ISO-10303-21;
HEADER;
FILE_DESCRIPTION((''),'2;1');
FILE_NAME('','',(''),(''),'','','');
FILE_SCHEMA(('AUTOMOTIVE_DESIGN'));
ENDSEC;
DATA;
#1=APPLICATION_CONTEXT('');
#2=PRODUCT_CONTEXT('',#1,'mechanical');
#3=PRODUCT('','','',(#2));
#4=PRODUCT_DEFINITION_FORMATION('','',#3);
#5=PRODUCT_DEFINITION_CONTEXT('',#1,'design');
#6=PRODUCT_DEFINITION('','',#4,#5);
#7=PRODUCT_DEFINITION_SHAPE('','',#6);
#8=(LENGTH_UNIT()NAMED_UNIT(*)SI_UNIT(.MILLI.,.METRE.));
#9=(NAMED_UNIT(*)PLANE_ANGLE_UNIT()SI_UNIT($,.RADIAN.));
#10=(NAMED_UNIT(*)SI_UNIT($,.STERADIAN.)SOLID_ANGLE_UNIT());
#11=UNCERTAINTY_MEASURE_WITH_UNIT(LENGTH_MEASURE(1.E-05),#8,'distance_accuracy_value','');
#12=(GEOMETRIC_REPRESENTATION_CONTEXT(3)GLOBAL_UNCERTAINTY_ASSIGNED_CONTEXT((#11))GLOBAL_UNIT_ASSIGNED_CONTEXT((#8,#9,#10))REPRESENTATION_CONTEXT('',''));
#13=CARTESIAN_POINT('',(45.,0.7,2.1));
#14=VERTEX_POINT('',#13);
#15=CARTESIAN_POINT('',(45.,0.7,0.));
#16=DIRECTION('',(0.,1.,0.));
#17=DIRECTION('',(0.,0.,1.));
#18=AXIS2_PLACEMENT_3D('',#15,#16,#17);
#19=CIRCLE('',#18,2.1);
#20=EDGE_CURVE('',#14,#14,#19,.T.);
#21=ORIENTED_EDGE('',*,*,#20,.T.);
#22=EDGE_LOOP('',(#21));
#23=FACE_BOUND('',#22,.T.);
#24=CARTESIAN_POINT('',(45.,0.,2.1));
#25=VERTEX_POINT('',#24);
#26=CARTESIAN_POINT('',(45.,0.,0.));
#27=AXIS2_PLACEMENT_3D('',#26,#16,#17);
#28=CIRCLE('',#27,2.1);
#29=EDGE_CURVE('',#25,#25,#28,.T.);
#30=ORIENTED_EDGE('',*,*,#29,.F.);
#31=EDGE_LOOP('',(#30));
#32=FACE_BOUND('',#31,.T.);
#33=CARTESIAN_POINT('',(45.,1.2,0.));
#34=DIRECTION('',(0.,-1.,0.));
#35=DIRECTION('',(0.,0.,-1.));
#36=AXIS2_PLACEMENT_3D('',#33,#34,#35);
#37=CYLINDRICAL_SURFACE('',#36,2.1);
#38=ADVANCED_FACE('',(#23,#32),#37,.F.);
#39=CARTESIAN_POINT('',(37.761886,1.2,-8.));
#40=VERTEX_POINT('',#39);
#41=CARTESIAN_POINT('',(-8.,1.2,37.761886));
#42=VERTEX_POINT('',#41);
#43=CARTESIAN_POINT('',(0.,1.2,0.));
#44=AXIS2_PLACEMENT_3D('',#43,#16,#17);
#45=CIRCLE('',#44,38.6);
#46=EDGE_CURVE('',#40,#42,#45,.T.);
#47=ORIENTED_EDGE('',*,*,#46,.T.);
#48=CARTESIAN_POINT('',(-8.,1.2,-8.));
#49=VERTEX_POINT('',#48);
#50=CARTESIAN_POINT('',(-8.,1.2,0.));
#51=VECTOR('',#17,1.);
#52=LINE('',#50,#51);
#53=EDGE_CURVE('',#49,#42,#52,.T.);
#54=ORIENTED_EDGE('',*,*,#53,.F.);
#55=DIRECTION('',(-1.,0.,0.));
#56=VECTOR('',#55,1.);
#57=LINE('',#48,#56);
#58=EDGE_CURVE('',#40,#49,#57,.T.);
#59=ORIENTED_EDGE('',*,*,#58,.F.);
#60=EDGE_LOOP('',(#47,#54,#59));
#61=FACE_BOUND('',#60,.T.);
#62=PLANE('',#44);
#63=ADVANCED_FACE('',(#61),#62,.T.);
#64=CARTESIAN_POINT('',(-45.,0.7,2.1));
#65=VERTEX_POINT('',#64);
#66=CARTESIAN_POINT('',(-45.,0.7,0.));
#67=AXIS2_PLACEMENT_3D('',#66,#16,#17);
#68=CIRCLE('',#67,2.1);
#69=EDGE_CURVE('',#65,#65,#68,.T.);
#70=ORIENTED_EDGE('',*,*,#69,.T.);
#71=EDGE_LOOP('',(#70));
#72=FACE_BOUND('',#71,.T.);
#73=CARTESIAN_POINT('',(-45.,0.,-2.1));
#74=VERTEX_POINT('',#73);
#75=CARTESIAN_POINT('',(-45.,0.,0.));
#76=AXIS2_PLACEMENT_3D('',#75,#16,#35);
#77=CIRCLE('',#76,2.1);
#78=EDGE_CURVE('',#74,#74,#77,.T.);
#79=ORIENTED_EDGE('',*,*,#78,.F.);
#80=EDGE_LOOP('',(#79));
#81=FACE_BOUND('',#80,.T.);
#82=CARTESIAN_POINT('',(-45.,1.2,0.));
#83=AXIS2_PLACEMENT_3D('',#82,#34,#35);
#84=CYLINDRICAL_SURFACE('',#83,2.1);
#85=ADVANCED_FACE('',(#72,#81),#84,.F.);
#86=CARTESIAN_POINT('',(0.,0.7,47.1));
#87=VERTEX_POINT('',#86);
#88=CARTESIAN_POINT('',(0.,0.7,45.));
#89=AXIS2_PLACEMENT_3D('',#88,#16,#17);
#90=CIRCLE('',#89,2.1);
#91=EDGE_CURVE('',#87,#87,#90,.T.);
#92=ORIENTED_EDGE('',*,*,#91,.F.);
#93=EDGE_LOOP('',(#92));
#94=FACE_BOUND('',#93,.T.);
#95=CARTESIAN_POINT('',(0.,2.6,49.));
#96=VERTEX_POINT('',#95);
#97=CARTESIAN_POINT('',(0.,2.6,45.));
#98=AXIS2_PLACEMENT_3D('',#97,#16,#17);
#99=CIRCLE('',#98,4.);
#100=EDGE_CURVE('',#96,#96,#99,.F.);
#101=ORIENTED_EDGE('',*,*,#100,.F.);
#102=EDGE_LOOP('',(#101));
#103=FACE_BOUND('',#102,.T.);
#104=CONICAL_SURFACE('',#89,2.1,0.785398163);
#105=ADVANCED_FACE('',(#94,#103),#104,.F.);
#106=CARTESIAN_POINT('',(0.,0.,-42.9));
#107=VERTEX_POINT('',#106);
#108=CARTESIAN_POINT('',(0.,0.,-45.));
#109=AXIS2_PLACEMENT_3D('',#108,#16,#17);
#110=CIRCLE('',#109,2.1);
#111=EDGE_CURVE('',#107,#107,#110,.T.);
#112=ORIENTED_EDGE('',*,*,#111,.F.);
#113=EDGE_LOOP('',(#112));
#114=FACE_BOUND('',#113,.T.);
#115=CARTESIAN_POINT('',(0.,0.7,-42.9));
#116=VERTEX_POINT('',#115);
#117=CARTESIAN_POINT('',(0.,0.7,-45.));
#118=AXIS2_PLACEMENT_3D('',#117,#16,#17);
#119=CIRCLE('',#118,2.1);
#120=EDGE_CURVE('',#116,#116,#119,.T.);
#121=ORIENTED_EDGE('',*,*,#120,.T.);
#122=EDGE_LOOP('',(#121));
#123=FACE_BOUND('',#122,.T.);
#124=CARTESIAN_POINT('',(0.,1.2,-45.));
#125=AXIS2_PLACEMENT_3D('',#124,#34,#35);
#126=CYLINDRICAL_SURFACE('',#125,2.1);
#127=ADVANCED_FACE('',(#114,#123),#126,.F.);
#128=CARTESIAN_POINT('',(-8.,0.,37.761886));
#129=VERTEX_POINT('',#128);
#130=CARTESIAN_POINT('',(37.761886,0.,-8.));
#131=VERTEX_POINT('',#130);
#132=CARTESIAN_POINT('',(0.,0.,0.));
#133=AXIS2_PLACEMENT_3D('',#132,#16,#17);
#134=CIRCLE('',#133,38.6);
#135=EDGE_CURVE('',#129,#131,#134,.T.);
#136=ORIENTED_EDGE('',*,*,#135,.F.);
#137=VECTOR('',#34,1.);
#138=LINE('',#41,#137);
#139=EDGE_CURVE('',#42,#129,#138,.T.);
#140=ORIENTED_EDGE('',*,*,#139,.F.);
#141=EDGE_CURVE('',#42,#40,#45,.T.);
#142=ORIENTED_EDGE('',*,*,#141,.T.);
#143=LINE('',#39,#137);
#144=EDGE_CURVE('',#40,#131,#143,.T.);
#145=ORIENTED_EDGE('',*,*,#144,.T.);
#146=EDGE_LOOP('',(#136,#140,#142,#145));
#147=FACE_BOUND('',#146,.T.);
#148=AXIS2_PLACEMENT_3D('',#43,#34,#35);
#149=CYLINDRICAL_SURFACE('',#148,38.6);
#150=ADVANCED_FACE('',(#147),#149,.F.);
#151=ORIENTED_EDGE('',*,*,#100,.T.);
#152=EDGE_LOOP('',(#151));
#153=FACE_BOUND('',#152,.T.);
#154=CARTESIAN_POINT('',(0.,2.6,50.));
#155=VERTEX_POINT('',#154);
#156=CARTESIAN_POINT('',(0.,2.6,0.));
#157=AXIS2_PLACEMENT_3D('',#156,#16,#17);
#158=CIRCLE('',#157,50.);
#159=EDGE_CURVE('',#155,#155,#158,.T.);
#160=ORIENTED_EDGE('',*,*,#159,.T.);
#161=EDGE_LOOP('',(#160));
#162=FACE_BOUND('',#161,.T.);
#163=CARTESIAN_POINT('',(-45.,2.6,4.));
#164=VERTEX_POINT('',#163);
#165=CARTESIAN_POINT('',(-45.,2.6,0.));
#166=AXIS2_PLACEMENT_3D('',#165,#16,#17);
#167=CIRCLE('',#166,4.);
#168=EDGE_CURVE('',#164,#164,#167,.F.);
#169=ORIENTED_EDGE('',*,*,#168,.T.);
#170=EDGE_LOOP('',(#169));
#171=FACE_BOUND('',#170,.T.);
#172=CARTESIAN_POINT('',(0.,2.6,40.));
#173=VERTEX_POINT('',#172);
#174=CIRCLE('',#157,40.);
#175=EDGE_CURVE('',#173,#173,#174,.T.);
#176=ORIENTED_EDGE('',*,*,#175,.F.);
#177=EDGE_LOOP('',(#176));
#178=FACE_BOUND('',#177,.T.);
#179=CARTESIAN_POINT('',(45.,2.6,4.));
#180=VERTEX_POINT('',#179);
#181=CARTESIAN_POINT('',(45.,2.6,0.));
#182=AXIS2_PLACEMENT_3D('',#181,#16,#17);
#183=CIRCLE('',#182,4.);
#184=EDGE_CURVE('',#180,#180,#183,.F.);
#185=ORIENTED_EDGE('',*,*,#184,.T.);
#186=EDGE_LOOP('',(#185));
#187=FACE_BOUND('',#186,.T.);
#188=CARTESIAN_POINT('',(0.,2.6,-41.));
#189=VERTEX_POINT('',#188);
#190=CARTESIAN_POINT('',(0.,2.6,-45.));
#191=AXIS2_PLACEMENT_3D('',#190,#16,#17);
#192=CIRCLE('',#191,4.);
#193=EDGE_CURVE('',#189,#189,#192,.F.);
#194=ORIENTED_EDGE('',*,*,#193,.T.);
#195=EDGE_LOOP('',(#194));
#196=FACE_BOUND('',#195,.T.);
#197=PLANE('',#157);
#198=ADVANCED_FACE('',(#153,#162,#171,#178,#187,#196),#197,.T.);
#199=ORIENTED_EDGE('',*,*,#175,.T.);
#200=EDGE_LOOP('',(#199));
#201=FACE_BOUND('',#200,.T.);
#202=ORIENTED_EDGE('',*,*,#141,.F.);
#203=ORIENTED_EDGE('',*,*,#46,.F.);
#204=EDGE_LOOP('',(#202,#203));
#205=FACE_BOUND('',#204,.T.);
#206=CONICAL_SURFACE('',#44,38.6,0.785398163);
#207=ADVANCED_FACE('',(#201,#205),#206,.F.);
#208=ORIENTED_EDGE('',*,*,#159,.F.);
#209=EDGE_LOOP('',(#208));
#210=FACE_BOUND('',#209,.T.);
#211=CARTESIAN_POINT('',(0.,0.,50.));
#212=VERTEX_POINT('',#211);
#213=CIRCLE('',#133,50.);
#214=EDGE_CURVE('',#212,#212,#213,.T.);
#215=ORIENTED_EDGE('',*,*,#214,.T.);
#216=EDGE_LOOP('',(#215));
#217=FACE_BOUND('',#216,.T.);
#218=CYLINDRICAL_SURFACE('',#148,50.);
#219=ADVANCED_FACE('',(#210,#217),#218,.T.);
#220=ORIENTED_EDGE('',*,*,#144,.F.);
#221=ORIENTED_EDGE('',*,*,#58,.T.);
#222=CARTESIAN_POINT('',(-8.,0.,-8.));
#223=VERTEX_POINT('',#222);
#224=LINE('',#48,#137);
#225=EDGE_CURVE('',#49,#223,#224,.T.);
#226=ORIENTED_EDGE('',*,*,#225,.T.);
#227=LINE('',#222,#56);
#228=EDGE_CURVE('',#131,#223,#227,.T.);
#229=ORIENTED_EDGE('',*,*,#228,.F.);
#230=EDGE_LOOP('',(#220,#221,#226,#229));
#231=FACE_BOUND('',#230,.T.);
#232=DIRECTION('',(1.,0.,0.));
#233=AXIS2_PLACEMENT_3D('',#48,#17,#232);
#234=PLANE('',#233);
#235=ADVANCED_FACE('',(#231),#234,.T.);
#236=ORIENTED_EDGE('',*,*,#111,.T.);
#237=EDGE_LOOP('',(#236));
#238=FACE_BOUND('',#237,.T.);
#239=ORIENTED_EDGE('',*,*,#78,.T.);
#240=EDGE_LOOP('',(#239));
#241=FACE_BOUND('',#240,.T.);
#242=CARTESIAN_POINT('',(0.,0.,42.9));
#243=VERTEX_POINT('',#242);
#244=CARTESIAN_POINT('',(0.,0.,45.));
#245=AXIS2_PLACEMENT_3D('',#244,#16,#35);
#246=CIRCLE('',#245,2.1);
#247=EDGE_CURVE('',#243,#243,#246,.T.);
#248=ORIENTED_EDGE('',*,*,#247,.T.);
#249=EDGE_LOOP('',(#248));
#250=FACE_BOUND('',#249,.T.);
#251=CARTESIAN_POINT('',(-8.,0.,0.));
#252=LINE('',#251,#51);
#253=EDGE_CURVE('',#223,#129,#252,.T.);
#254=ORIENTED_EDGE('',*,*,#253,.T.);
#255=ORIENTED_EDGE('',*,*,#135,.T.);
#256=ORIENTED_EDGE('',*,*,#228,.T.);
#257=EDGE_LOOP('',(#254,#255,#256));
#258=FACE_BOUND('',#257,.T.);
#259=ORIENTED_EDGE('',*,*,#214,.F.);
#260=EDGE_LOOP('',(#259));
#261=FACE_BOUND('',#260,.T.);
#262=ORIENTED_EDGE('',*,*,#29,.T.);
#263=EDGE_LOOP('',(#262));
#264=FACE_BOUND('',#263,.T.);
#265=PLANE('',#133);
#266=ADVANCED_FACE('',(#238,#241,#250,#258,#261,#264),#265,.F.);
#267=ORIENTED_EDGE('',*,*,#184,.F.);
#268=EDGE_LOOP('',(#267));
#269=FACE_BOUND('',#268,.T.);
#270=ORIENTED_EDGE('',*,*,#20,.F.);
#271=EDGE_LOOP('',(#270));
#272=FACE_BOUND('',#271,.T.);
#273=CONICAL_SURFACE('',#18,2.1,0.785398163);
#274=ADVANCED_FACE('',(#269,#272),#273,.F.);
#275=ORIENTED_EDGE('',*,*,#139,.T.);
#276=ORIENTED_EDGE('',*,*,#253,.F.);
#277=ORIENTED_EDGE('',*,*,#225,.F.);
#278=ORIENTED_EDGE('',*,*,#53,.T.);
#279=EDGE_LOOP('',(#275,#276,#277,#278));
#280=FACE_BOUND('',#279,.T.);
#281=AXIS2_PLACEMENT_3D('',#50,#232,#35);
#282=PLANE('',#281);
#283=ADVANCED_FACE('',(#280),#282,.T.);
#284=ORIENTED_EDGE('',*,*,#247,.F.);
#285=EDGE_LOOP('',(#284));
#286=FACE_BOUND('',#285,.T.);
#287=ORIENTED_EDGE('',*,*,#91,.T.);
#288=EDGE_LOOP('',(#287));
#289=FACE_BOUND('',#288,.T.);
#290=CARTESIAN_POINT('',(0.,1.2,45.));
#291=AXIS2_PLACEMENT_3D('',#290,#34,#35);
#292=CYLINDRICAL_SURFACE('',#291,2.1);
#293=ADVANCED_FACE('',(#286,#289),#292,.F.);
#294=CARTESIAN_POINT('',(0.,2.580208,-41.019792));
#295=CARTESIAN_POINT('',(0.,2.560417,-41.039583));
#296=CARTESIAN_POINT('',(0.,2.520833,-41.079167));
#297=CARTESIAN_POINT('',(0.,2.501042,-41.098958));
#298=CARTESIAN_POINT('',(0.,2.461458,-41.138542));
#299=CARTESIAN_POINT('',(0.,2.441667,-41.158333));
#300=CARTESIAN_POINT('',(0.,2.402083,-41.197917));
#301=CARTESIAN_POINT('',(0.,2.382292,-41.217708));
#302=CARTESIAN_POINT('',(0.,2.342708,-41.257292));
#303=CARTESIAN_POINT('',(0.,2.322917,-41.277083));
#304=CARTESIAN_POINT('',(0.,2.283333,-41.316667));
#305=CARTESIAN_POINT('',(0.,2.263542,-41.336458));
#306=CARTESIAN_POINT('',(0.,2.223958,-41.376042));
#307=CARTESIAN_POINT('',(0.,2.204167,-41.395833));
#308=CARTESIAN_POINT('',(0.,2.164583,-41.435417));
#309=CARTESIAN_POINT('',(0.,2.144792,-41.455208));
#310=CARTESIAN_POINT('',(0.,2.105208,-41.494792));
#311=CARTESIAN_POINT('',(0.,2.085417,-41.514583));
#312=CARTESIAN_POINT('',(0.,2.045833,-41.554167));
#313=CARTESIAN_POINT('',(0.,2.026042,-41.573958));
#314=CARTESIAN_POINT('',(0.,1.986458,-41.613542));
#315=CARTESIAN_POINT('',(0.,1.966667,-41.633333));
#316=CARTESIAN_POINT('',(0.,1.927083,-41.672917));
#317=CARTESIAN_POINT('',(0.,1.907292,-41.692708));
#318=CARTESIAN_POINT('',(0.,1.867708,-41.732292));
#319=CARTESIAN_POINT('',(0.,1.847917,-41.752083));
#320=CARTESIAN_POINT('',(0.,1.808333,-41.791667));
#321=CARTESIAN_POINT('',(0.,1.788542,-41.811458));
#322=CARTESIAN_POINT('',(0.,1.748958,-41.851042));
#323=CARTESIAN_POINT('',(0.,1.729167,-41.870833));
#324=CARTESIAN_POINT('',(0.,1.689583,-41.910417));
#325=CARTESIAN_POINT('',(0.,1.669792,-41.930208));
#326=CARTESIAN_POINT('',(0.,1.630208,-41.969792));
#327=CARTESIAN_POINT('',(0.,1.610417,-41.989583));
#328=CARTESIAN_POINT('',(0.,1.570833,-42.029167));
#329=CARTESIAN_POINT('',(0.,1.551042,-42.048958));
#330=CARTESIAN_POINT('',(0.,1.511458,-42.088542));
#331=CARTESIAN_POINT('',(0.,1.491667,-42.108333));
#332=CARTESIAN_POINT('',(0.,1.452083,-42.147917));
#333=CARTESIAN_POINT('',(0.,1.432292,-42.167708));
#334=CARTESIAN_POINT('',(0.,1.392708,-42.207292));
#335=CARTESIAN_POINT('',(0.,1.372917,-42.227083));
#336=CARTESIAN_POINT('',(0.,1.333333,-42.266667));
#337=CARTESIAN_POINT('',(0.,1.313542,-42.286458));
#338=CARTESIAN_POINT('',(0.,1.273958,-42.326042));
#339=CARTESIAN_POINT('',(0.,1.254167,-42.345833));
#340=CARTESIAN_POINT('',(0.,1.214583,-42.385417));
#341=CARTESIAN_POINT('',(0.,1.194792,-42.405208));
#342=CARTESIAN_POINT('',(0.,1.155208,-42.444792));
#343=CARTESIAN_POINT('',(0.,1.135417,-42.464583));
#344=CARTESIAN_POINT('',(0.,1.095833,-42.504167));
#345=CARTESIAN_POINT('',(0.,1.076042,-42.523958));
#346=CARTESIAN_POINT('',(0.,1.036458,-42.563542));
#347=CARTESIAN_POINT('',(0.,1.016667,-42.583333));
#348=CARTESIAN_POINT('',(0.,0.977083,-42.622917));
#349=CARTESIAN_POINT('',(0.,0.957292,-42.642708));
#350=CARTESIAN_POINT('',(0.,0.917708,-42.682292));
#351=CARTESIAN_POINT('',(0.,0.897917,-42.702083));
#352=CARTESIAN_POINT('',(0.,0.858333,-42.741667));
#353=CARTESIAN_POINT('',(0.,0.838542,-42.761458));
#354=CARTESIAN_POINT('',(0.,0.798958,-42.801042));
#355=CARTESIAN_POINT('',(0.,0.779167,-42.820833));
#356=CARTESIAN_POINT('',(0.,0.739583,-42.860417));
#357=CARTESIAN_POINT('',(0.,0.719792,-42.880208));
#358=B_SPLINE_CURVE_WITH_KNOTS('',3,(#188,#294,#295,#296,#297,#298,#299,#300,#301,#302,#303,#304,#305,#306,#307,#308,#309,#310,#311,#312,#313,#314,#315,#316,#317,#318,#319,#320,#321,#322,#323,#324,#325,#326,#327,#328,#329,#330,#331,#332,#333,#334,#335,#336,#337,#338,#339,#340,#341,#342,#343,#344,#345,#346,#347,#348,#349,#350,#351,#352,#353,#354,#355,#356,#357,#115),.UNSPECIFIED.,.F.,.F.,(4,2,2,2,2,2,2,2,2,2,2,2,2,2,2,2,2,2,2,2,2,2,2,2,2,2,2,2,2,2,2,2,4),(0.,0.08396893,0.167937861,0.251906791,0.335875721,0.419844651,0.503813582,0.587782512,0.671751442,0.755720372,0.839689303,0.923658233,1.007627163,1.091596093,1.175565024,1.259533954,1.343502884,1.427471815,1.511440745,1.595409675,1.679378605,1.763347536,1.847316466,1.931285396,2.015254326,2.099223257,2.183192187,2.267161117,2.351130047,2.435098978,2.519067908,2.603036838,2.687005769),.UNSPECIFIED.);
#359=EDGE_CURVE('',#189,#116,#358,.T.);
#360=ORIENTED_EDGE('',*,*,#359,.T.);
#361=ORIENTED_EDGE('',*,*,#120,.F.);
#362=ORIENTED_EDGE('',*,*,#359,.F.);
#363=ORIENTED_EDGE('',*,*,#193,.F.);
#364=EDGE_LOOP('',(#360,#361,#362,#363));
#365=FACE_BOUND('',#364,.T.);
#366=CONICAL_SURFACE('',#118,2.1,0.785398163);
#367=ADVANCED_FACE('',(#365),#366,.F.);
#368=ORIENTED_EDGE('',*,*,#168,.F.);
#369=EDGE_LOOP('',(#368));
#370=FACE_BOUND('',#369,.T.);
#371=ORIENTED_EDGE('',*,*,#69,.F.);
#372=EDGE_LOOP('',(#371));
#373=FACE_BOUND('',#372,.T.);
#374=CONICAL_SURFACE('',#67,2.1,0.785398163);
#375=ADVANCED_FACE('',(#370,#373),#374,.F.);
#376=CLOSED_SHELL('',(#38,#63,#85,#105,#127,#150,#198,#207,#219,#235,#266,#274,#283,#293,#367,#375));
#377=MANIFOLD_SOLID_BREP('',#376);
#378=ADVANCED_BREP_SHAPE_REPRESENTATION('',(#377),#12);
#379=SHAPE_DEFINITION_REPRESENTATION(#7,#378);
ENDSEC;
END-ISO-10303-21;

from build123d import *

# Parameters (mm, degrees)
SKETCH1_R           = 50
SKETCH1_R_2         = 2.1
BOSS_EXTRUDE1_DEPTH = 1.2
SKETCH2_R           = 50
SKETCH2_R_2         = 2.1
SKETCH2_R_3         = 40
BOSS_EXTRUDE2_DEPTH = 1.4
CHAMFER1_SIZE       = 1.4
CHAMFER2_SIZE       = 1.9


with BuildPart() as part:
    # Sketch1 → Boss-Extrude1 (new body)
    with BuildSketch(Plane(origin=(0, 0, 0), x_dir=(1, 0, 0), z_dir=(0, 1, 0))):
        with Locations(Location((0, 0, 0), (0, 0, 270))):
            Circle(SKETCH1_R)
        with Locations(Location((45, 0, 0), (0, 0, 270))):
            Circle(SKETCH1_R_2, mode=Mode.SUBTRACT)
        with Locations(Location((0, 45, 0), (0, 0, 270))):
            Circle(SKETCH1_R_2, mode=Mode.SUBTRACT)
        with Locations(Location((0, -45, 0), (0, 0, 90))):
            Circle(SKETCH1_R_2, mode=Mode.SUBTRACT)
        with Locations(Location((-45, 0, 0), (0, 0, 90))):
            Circle(SKETCH1_R_2, mode=Mode.SUBTRACT)
        with BuildLine():
            Line((-8, 0), (-8, 8))
            Line((-8, 8), (37.761885546, 8))
            ThreePointArc((37.761885546, 8), (27.294321754, -27.294321754), (-8, -37.761885546))
            Line((-8, -37.761885546), (-8, 0))
        make_face(mode=Mode.SUBTRACT)
    extrude(amount=BOSS_EXTRUDE1_DEPTH)

    # Sketch2 → Boss-Extrude2 (add)
    with BuildSketch(Plane(origin=(0, 1.2, 0), x_dir=(1, 0, 0), z_dir=(0, 1, 0))):
        with Locations(Location((0, 0, 0), (0, 0, 270))):
            Circle(SKETCH2_R)
        with Locations(Location((45, 0, 0), (0, 0, 270))):
            Circle(SKETCH2_R_2, mode=Mode.SUBTRACT)
        with Locations(Location((0, 45, 0), (0, 0, 270))):
            Circle(SKETCH2_R_2, mode=Mode.SUBTRACT)
        with Locations(Location((0, -45, 0), (0, 0, 90))):
            Circle(SKETCH2_R_2, mode=Mode.SUBTRACT)
        with Locations(Location((-45, 0, 0), (0, 0, 90))):
            Circle(SKETCH2_R_2, mode=Mode.SUBTRACT)
        with Locations(Location((0, 0, 0), (0, 0, 270))):
            Circle(SKETCH2_R_3, mode=Mode.SUBTRACT)
    extrude(amount=BOSS_EXTRUDE2_DEPTH)

    # Chamfer1
    chamfer1_edges = [part.edges().sort_by_distance(p)[0] for p in [
        (0, 1.2, -40),
    ]]
    chamfer(chamfer1_edges, length=CHAMFER1_SIZE - 0.0001)  # a hair under: the kernel refuses the full size

    # Chamfer2
    chamfer2_edges = [part.edges().sort_by_distance(p)[0] for p in [
        (45, 2.6, -2.1),
        (0, 2.6, -47.1),
        (0, 2.6, 47.1),
        (-45, 2.6, 2.1),
    ]]
    chamfer(chamfer2_edges, length=CHAMFER2_SIZE)


solid = part.part
